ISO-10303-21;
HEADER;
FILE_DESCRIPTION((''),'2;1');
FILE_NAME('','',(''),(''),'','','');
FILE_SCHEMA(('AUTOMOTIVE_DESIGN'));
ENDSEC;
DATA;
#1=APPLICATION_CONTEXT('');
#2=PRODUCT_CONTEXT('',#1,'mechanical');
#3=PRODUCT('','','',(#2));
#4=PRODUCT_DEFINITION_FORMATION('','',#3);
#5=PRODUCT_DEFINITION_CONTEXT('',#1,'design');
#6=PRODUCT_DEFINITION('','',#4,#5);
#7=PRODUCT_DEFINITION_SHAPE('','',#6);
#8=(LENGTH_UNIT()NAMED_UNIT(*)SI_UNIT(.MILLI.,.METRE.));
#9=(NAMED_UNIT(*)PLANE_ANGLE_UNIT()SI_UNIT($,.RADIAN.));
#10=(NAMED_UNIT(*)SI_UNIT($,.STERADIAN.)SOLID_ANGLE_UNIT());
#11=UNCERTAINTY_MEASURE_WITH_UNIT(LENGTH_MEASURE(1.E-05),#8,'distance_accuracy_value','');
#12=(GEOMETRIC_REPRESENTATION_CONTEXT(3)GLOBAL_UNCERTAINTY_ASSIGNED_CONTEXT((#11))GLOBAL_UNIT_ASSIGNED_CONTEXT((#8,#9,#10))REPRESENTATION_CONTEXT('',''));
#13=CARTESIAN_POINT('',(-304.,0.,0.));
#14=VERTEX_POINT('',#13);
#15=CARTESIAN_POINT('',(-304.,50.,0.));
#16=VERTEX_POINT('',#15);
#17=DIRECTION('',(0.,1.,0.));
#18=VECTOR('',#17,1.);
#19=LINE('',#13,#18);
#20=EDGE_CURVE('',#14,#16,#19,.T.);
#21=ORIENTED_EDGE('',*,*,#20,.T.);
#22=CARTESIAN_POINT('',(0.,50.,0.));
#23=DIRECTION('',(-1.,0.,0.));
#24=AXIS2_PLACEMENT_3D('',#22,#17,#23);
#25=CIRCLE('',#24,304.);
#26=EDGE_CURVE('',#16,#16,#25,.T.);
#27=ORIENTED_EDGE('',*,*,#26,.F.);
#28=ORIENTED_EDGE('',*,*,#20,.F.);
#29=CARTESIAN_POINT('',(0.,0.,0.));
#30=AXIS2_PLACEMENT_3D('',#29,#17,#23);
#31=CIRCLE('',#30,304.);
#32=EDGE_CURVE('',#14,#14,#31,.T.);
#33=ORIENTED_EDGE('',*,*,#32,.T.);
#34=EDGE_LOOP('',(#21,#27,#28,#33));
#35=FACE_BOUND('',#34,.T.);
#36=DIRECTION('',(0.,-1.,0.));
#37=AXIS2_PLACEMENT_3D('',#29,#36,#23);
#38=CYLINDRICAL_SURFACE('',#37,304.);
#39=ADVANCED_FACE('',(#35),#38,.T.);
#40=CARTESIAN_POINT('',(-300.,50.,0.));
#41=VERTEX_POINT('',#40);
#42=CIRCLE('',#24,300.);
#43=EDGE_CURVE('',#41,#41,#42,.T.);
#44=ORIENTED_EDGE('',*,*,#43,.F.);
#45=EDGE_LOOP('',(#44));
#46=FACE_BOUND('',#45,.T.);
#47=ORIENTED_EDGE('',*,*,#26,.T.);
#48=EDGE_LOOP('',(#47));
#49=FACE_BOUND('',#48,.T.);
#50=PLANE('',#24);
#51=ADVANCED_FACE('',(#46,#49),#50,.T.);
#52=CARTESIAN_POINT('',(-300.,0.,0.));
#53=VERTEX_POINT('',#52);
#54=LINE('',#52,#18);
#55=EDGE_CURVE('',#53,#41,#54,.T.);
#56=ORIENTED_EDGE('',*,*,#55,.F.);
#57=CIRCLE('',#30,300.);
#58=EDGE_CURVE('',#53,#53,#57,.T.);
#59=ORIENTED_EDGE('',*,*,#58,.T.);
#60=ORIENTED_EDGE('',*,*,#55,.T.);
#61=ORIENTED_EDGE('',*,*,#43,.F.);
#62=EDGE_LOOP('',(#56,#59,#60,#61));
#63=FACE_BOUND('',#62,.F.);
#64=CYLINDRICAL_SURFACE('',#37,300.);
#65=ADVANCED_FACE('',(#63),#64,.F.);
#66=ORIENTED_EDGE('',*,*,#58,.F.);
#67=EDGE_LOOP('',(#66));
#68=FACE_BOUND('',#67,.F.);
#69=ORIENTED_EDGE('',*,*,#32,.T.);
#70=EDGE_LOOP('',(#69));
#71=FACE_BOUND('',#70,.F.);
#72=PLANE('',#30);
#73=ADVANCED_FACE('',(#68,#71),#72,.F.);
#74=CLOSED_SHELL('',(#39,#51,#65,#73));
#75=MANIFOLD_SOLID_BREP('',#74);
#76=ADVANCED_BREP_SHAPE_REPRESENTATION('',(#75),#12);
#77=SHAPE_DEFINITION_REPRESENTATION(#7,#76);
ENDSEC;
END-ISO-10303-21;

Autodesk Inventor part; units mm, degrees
ref_plane "YZ Plane" through (0, 0, 0) normal (1, 0, 0) x (0, 1, 0)
ref_plane "XZ Plane" through (0, 0, 0) normal (0, 1, 0) x (-1, 0, 0)
ref_plane "XY Plane" through (0, 0, 0) normal (0, 0, 1) x (1, 0, 0)
sketch "Sketch1" plane through (0, 0, 0) normal (0, 1, 0) x (-1, 0, 0)
  circle A0 centre (0, 0) radius 300
  line L0 (290, 3.75) -> (260, 3.75)
  line L1 (260, -3.75) -> (290, -3.75)
  arc A1 (291.75, 2) -> (290, 3.75) centre (290, 2) ccw
  arc A2 (290, -3.75) -> (291.75, -2) centre (290, -2) ccw
  arc A3 (258.25, -2) -> (260, -3.75) centre (260, -2) ccw
  arc A4 (260, 3.75) -> (258.25, 2) centre (260, 2) ccw
  line L2 (258.25, 2) -> (258.25, -2)
  line L3 (291.75, -2) -> (291.75, 2)
  line L4 (306.241, 0) -> (300, 0)
  line L5 (300, 0) -> (281.7438, 0)
  line L6 (86.0485, 276.9652) -> (76.778, 248.4335)
  arc A5 (88.2536, 278.0888) -> (86.0485, 276.9652) centre (87.7128, 276.4244) ccw
  line L7 (92.0578, 276.8527) -> (88.2536, 278.0888)
  line L8 (83.9109, 246.1159) -> (93.1814, 274.6476)
  arc A6 (93.1814, 274.6476) -> (92.0578, 276.8527) centre (91.517, 275.1884) ccw
  arc A7 (76.778, 248.4335) -> (77.9015, 246.2284) centre (78.4423, 247.8927) ccw
  line L9 (77.9015, 246.2284) -> (81.7058, 244.9923)
  arc A8 (81.7058, 244.9923) -> (83.9109, 246.1159) centre (82.2465, 246.6567) ccw
  line L10 (-236.8191, 167.4239) -> (-212.5486, 149.7904)
  arc A9 (-237.2063, 169.8683) -> (-236.8191, 167.4239) centre (-235.7905, 168.8397) ccw
  line L11 (-234.8551, 173.1044) -> (-237.2063, 169.8683)
  line L12 (-208.1402, 155.858) -> (-232.4107, 173.4915)
  arc A10 (-232.4107, 173.4915) -> (-234.8551, 173.1044) centre (-233.4394, 172.0758) ccw
  arc A11 (-212.5486, 149.7904) -> (-210.1042, 150.1775) centre (-211.52, 151.2061) ccw
  line L13 (-210.1042, 150.1775) -> (-207.7531, 153.4136)
  arc A12 (-207.7531, 153.4136) -> (-208.1402, 155.858) centre (-209.1688, 154.4422) ccw
  line L14 (-232.4107, -173.4915) -> (-208.1402, -155.858)
  arc A13 (-234.8551, -173.1044) -> (-232.4107, -173.4915) centre (-233.4394, -172.0758) ccw
  line L15 (-237.2063, -169.8683) -> (-234.8551, -173.1044)
  line L16 (-212.5486, -149.7904) -> (-236.8191, -167.4239)
  arc A14 (-236.8191, -167.4239) -> (-237.2063, -169.8683) centre (-235.7905, -168.8397) ccw
  arc A15 (-208.1402, -155.858) -> (-207.7531, -153.4136) centre (-209.1688, -154.4422) ccw
  line L17 (-207.7531, -153.4136) -> (-210.1042, -150.1775)
  arc A16 (-210.1042, -150.1775) -> (-212.5486, -149.7904) centre (-211.52, -151.2061) ccw
  line L18 (93.1814, -274.6476) -> (83.9109, -246.1159)
  arc A17 (92.0578, -276.8527) -> (93.1814, -274.6476) centre (91.517, -275.1884) ccw
  line L19 (88.2536, -278.0888) -> (92.0578, -276.8527)
  line L20 (76.778, -248.4335) -> (86.0485, -276.9652)
  arc A18 (86.0485, -276.9652) -> (88.2536, -278.0888) centre (87.7128, -276.4244) ccw
  arc A19 (83.9109, -246.1159) -> (81.7058, -244.9923) centre (82.2465, -246.6567) ccw
  line L21 (81.7058, -244.9923) -> (77.9015, -246.2284)
  arc A20 (77.9015, -246.2284) -> (76.778, -248.4335) centre (78.4423, -247.8927) ccw
  circle A21 centre (0, 0) radius 304
  point P0 (87.0636, 267.9543)
  point P1 (-227.9355, 165.6049)
  point P2 (-227.9355, -165.6049)
  point P3 (87.0636, -267.9543)
  dimension "d3" = 7.5
  dimension "d6" = 30
  dimension "d7" = 3.5
  dimension "d8" = 3.5
  dimension "d26" = 8.25
  dimension "d27" = 33.5
  dimension "d28" = 7.5
  dimension "d43" = 4
extrude "Extrusion3" add sketch "Sketch1" along normal blind 50 contours A21
properties part number "Roof Banding"
